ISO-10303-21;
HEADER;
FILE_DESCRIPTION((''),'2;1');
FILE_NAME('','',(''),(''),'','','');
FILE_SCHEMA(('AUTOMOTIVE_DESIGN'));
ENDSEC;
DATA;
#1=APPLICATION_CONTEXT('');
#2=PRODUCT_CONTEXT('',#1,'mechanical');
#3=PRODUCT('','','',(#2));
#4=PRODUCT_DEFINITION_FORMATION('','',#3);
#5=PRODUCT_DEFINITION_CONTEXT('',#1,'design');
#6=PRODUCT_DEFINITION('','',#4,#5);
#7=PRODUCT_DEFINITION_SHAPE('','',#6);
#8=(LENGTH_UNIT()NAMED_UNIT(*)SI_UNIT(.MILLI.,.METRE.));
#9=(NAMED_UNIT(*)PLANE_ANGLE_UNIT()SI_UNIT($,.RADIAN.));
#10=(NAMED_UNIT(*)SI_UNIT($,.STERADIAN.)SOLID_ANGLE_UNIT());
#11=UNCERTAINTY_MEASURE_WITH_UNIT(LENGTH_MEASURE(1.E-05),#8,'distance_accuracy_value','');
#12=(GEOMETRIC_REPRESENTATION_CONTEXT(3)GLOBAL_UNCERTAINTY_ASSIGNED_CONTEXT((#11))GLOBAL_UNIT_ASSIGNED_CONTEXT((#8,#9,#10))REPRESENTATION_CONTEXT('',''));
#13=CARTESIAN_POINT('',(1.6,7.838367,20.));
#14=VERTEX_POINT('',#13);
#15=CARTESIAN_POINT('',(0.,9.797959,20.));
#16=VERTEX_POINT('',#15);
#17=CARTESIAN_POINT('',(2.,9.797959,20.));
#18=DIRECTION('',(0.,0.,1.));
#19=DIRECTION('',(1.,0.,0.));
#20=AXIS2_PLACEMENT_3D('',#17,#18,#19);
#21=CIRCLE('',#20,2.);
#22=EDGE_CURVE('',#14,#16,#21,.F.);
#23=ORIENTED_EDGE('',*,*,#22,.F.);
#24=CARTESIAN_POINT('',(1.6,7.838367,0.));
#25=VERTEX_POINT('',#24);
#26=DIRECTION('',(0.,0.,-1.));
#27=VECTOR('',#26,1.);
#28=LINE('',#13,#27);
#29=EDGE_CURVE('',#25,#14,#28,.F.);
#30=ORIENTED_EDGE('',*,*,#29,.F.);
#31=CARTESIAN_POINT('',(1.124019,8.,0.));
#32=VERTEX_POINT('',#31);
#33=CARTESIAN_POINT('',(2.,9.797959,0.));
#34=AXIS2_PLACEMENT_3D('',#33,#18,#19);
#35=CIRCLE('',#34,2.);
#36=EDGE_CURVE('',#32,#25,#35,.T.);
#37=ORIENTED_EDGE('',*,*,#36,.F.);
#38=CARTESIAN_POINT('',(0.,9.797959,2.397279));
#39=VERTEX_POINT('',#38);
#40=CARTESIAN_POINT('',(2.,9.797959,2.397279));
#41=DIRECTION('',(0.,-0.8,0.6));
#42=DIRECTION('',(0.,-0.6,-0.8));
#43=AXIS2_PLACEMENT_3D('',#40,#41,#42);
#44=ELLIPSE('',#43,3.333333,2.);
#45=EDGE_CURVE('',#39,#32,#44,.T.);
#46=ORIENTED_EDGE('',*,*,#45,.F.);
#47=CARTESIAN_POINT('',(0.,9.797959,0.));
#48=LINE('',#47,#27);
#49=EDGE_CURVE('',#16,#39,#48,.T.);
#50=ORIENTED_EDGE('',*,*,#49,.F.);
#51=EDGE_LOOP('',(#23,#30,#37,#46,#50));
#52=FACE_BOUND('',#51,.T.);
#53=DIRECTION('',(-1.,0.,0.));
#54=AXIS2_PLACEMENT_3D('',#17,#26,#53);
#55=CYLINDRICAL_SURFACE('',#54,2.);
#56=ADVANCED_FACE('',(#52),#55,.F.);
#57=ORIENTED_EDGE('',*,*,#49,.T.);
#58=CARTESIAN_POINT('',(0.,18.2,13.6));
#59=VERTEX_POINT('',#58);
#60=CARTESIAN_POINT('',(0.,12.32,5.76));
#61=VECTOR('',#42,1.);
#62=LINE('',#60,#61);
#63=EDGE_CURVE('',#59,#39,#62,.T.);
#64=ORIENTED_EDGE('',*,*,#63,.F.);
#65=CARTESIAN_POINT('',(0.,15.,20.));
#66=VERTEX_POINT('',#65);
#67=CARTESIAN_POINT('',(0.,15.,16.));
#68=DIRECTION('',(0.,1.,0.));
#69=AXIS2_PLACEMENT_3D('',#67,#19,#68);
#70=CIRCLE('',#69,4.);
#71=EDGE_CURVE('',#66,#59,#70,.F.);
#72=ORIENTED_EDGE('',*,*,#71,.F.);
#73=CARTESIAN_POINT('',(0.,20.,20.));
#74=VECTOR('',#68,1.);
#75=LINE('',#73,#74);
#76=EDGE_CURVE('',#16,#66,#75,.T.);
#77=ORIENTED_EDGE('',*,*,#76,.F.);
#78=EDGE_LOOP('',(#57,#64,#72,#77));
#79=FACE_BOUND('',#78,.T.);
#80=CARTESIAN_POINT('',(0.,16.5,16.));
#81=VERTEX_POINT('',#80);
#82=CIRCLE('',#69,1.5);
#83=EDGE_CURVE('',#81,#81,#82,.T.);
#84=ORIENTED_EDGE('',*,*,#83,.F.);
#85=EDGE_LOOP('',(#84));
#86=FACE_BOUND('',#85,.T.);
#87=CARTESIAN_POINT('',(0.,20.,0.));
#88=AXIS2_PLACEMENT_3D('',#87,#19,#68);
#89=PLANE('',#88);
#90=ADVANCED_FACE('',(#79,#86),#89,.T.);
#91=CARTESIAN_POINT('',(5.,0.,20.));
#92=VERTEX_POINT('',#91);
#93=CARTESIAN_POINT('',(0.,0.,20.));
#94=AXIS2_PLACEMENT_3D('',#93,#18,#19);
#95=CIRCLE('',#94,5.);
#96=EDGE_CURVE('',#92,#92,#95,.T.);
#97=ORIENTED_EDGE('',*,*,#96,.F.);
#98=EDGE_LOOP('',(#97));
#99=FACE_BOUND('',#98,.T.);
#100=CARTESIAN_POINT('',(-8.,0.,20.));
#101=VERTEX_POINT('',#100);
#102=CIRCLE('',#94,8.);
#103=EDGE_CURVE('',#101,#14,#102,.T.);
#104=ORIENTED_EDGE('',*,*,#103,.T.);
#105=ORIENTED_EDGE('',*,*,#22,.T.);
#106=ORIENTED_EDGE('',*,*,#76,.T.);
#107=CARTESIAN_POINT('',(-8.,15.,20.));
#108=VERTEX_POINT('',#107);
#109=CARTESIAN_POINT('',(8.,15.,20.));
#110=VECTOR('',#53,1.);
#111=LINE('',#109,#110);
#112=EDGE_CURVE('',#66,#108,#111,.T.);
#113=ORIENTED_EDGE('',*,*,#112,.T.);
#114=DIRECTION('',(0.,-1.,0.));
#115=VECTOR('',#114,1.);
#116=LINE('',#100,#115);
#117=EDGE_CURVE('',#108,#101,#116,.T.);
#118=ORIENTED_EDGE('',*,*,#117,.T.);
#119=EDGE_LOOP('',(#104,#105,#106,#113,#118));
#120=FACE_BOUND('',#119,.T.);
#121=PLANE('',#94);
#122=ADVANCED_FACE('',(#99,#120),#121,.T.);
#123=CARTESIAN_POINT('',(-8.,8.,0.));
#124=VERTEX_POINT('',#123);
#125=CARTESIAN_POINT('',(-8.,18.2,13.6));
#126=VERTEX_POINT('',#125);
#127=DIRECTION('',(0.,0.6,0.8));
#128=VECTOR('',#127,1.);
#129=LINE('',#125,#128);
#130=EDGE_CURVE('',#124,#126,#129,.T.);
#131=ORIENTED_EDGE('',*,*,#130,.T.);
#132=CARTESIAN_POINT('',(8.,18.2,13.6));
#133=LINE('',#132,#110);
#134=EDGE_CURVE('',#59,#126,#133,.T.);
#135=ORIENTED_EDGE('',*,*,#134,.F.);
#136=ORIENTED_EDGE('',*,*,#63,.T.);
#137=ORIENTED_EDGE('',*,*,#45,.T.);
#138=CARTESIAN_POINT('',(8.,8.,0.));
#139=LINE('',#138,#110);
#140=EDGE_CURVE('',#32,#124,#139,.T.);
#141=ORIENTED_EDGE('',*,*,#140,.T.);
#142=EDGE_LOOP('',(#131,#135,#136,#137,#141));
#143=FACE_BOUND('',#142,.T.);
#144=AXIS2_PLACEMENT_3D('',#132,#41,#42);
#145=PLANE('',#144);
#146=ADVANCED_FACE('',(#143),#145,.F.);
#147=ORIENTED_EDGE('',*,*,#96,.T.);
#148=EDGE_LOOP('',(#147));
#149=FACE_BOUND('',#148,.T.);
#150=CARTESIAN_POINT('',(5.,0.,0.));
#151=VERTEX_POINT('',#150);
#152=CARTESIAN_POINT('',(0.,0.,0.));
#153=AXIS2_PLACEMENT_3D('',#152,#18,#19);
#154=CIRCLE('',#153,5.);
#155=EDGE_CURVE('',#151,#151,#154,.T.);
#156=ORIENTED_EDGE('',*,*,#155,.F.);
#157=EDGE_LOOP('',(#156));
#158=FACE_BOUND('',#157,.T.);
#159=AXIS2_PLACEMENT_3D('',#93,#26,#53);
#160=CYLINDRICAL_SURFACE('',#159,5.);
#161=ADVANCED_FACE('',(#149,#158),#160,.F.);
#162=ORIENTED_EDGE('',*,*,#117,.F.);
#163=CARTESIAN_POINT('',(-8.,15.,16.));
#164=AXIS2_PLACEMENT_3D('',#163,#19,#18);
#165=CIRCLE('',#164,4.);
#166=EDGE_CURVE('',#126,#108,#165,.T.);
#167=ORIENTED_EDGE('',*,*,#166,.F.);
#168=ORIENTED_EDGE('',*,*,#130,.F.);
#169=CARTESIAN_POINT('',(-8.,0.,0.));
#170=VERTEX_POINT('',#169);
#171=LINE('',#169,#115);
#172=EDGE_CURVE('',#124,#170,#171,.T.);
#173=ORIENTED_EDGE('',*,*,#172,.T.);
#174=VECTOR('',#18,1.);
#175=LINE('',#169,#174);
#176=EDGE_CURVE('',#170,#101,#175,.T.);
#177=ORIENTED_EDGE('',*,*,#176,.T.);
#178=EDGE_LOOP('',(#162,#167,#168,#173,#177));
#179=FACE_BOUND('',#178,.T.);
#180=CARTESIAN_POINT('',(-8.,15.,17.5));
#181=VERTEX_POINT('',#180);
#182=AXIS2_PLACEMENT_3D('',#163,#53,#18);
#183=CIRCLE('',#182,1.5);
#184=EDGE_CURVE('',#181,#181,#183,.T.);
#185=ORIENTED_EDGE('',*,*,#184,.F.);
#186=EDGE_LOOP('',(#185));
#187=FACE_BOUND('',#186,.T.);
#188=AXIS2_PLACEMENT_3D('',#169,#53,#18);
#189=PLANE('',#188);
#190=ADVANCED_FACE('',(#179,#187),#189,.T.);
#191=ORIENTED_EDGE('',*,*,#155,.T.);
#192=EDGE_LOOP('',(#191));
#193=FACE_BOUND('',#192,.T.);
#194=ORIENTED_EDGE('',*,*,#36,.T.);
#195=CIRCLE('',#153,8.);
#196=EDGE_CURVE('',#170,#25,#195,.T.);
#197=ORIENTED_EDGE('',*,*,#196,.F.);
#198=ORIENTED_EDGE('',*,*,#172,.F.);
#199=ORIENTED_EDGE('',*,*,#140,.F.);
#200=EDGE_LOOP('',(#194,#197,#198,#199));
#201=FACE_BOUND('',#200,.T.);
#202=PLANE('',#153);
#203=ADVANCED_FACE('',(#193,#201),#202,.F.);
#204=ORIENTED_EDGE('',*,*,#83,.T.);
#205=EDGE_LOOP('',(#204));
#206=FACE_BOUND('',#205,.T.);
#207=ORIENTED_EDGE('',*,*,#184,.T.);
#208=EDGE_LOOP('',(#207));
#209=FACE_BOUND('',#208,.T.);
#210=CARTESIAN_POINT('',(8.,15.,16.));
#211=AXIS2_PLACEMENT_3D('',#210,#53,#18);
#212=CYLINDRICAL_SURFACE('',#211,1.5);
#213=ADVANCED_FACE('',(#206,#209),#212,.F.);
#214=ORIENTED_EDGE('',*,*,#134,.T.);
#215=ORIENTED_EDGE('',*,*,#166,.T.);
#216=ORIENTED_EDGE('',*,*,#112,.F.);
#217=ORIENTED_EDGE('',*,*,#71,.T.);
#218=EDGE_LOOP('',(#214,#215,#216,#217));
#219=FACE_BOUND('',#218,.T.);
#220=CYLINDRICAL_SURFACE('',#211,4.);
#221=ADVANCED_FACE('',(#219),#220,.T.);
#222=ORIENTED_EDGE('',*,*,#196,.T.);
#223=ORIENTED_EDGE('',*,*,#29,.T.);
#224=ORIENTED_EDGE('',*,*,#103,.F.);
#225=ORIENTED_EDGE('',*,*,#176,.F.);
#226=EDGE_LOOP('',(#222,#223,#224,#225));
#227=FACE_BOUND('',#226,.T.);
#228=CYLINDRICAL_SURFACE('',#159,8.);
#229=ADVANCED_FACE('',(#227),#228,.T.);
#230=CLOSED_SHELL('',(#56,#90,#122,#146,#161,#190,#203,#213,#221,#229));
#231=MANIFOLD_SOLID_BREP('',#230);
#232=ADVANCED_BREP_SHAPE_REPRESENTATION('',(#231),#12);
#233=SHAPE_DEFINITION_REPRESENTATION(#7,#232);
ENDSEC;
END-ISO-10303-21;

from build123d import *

# Parameters (mm, degrees)
SKETCH_1_R          = 8
SKETCH_1_R_2        = 5
EXTRUDE_1_DEPTH     = 20
EXTRUDE_2_DEPTH     = 20
SKETCH_3_R          = 1.5
CUT_EXTRUDE_1_DEPTH = 33.496153619
FILLET_1_R          = 2


with BuildPart() as part:
    # 草图1 → 凸台-拉伸1 (new body)
    with BuildSketch(Plane.XY):
        Circle(SKETCH_1_R)
        Circle(SKETCH_1_R_2, mode=Mode.SUBTRACT)
    extrude(amount=EXTRUDE_1_DEPTH)

    # 草图2 → 凸台-拉伸2 (add, through all)
    with BuildSketch(Plane.XY.offset(20)):
        with BuildLine():
            Line((-8, 0), (-8, 20))
            Line((-8, 20), (0, 20))
            Line((0, 20), (0, 8))
            ThreePointArc((0, 8), (-5.656854249, 5.656854249), (-8, 0))
        make_face()
    extrude(amount=-EXTRUDE_2_DEPTH)

    # 草图3 → 切除-拉伸1 (cut, through all)
    with BuildSketch(Plane.ZY.offset(8)):
        with Locations((16, 15)):
            Circle(SKETCH_3_R)
        with BuildLine():
            Line((13.6, 18.2), (0, 8))
            Line((0, 8), (0, 20))
            Line((0, 20), (20, 20))
            Line((20, 20), (20, 15))
            ThreePointArc((20, 15), (17.788854382, 18.577708764), (13.6, 18.2))
        make_face()
    extrude(amount=-CUT_EXTRUDE_1_DEPTH, mode=Mode.SUBTRACT)

    # 圆角1
    # the kernel refuses this fillet: 2 mm, written as the material it adds along each edge
    with BuildSketch(Plane(origin=(0, 8, 20), x_dir=(0.994936153005124, -0.10050896200520786, 0), z_dir=(0, 0, -1))) as fillet_1_piece_1_section:
        with BuildLine():
            CenterArc((1.809161316, -1.989872306), FILLET_1_R, 95.768479516, 78.463040967)
            Line((-0.18071099, -1.788854382), (0, 0))
            ThreePointArc((0, 0), (0.804071696, -0.040510776), (1.608143392, 0))
        make_face()
    fillet_1_piece_1 = extrude(amount=20, mode=Mode.PRIVATE)
    fillet_1_piece_1 = split(fillet_1_piece_1, bisect_by=Plane(origin=(0.363016692, 13.065708847, 6.754278462), z_dir=(0, -0.8000000000000002, 0.5999999999999999)), keep=Keep.TOP, mode=Mode.PRIVATE)
    add(fillet_1_piece_1)


solid = part.part
